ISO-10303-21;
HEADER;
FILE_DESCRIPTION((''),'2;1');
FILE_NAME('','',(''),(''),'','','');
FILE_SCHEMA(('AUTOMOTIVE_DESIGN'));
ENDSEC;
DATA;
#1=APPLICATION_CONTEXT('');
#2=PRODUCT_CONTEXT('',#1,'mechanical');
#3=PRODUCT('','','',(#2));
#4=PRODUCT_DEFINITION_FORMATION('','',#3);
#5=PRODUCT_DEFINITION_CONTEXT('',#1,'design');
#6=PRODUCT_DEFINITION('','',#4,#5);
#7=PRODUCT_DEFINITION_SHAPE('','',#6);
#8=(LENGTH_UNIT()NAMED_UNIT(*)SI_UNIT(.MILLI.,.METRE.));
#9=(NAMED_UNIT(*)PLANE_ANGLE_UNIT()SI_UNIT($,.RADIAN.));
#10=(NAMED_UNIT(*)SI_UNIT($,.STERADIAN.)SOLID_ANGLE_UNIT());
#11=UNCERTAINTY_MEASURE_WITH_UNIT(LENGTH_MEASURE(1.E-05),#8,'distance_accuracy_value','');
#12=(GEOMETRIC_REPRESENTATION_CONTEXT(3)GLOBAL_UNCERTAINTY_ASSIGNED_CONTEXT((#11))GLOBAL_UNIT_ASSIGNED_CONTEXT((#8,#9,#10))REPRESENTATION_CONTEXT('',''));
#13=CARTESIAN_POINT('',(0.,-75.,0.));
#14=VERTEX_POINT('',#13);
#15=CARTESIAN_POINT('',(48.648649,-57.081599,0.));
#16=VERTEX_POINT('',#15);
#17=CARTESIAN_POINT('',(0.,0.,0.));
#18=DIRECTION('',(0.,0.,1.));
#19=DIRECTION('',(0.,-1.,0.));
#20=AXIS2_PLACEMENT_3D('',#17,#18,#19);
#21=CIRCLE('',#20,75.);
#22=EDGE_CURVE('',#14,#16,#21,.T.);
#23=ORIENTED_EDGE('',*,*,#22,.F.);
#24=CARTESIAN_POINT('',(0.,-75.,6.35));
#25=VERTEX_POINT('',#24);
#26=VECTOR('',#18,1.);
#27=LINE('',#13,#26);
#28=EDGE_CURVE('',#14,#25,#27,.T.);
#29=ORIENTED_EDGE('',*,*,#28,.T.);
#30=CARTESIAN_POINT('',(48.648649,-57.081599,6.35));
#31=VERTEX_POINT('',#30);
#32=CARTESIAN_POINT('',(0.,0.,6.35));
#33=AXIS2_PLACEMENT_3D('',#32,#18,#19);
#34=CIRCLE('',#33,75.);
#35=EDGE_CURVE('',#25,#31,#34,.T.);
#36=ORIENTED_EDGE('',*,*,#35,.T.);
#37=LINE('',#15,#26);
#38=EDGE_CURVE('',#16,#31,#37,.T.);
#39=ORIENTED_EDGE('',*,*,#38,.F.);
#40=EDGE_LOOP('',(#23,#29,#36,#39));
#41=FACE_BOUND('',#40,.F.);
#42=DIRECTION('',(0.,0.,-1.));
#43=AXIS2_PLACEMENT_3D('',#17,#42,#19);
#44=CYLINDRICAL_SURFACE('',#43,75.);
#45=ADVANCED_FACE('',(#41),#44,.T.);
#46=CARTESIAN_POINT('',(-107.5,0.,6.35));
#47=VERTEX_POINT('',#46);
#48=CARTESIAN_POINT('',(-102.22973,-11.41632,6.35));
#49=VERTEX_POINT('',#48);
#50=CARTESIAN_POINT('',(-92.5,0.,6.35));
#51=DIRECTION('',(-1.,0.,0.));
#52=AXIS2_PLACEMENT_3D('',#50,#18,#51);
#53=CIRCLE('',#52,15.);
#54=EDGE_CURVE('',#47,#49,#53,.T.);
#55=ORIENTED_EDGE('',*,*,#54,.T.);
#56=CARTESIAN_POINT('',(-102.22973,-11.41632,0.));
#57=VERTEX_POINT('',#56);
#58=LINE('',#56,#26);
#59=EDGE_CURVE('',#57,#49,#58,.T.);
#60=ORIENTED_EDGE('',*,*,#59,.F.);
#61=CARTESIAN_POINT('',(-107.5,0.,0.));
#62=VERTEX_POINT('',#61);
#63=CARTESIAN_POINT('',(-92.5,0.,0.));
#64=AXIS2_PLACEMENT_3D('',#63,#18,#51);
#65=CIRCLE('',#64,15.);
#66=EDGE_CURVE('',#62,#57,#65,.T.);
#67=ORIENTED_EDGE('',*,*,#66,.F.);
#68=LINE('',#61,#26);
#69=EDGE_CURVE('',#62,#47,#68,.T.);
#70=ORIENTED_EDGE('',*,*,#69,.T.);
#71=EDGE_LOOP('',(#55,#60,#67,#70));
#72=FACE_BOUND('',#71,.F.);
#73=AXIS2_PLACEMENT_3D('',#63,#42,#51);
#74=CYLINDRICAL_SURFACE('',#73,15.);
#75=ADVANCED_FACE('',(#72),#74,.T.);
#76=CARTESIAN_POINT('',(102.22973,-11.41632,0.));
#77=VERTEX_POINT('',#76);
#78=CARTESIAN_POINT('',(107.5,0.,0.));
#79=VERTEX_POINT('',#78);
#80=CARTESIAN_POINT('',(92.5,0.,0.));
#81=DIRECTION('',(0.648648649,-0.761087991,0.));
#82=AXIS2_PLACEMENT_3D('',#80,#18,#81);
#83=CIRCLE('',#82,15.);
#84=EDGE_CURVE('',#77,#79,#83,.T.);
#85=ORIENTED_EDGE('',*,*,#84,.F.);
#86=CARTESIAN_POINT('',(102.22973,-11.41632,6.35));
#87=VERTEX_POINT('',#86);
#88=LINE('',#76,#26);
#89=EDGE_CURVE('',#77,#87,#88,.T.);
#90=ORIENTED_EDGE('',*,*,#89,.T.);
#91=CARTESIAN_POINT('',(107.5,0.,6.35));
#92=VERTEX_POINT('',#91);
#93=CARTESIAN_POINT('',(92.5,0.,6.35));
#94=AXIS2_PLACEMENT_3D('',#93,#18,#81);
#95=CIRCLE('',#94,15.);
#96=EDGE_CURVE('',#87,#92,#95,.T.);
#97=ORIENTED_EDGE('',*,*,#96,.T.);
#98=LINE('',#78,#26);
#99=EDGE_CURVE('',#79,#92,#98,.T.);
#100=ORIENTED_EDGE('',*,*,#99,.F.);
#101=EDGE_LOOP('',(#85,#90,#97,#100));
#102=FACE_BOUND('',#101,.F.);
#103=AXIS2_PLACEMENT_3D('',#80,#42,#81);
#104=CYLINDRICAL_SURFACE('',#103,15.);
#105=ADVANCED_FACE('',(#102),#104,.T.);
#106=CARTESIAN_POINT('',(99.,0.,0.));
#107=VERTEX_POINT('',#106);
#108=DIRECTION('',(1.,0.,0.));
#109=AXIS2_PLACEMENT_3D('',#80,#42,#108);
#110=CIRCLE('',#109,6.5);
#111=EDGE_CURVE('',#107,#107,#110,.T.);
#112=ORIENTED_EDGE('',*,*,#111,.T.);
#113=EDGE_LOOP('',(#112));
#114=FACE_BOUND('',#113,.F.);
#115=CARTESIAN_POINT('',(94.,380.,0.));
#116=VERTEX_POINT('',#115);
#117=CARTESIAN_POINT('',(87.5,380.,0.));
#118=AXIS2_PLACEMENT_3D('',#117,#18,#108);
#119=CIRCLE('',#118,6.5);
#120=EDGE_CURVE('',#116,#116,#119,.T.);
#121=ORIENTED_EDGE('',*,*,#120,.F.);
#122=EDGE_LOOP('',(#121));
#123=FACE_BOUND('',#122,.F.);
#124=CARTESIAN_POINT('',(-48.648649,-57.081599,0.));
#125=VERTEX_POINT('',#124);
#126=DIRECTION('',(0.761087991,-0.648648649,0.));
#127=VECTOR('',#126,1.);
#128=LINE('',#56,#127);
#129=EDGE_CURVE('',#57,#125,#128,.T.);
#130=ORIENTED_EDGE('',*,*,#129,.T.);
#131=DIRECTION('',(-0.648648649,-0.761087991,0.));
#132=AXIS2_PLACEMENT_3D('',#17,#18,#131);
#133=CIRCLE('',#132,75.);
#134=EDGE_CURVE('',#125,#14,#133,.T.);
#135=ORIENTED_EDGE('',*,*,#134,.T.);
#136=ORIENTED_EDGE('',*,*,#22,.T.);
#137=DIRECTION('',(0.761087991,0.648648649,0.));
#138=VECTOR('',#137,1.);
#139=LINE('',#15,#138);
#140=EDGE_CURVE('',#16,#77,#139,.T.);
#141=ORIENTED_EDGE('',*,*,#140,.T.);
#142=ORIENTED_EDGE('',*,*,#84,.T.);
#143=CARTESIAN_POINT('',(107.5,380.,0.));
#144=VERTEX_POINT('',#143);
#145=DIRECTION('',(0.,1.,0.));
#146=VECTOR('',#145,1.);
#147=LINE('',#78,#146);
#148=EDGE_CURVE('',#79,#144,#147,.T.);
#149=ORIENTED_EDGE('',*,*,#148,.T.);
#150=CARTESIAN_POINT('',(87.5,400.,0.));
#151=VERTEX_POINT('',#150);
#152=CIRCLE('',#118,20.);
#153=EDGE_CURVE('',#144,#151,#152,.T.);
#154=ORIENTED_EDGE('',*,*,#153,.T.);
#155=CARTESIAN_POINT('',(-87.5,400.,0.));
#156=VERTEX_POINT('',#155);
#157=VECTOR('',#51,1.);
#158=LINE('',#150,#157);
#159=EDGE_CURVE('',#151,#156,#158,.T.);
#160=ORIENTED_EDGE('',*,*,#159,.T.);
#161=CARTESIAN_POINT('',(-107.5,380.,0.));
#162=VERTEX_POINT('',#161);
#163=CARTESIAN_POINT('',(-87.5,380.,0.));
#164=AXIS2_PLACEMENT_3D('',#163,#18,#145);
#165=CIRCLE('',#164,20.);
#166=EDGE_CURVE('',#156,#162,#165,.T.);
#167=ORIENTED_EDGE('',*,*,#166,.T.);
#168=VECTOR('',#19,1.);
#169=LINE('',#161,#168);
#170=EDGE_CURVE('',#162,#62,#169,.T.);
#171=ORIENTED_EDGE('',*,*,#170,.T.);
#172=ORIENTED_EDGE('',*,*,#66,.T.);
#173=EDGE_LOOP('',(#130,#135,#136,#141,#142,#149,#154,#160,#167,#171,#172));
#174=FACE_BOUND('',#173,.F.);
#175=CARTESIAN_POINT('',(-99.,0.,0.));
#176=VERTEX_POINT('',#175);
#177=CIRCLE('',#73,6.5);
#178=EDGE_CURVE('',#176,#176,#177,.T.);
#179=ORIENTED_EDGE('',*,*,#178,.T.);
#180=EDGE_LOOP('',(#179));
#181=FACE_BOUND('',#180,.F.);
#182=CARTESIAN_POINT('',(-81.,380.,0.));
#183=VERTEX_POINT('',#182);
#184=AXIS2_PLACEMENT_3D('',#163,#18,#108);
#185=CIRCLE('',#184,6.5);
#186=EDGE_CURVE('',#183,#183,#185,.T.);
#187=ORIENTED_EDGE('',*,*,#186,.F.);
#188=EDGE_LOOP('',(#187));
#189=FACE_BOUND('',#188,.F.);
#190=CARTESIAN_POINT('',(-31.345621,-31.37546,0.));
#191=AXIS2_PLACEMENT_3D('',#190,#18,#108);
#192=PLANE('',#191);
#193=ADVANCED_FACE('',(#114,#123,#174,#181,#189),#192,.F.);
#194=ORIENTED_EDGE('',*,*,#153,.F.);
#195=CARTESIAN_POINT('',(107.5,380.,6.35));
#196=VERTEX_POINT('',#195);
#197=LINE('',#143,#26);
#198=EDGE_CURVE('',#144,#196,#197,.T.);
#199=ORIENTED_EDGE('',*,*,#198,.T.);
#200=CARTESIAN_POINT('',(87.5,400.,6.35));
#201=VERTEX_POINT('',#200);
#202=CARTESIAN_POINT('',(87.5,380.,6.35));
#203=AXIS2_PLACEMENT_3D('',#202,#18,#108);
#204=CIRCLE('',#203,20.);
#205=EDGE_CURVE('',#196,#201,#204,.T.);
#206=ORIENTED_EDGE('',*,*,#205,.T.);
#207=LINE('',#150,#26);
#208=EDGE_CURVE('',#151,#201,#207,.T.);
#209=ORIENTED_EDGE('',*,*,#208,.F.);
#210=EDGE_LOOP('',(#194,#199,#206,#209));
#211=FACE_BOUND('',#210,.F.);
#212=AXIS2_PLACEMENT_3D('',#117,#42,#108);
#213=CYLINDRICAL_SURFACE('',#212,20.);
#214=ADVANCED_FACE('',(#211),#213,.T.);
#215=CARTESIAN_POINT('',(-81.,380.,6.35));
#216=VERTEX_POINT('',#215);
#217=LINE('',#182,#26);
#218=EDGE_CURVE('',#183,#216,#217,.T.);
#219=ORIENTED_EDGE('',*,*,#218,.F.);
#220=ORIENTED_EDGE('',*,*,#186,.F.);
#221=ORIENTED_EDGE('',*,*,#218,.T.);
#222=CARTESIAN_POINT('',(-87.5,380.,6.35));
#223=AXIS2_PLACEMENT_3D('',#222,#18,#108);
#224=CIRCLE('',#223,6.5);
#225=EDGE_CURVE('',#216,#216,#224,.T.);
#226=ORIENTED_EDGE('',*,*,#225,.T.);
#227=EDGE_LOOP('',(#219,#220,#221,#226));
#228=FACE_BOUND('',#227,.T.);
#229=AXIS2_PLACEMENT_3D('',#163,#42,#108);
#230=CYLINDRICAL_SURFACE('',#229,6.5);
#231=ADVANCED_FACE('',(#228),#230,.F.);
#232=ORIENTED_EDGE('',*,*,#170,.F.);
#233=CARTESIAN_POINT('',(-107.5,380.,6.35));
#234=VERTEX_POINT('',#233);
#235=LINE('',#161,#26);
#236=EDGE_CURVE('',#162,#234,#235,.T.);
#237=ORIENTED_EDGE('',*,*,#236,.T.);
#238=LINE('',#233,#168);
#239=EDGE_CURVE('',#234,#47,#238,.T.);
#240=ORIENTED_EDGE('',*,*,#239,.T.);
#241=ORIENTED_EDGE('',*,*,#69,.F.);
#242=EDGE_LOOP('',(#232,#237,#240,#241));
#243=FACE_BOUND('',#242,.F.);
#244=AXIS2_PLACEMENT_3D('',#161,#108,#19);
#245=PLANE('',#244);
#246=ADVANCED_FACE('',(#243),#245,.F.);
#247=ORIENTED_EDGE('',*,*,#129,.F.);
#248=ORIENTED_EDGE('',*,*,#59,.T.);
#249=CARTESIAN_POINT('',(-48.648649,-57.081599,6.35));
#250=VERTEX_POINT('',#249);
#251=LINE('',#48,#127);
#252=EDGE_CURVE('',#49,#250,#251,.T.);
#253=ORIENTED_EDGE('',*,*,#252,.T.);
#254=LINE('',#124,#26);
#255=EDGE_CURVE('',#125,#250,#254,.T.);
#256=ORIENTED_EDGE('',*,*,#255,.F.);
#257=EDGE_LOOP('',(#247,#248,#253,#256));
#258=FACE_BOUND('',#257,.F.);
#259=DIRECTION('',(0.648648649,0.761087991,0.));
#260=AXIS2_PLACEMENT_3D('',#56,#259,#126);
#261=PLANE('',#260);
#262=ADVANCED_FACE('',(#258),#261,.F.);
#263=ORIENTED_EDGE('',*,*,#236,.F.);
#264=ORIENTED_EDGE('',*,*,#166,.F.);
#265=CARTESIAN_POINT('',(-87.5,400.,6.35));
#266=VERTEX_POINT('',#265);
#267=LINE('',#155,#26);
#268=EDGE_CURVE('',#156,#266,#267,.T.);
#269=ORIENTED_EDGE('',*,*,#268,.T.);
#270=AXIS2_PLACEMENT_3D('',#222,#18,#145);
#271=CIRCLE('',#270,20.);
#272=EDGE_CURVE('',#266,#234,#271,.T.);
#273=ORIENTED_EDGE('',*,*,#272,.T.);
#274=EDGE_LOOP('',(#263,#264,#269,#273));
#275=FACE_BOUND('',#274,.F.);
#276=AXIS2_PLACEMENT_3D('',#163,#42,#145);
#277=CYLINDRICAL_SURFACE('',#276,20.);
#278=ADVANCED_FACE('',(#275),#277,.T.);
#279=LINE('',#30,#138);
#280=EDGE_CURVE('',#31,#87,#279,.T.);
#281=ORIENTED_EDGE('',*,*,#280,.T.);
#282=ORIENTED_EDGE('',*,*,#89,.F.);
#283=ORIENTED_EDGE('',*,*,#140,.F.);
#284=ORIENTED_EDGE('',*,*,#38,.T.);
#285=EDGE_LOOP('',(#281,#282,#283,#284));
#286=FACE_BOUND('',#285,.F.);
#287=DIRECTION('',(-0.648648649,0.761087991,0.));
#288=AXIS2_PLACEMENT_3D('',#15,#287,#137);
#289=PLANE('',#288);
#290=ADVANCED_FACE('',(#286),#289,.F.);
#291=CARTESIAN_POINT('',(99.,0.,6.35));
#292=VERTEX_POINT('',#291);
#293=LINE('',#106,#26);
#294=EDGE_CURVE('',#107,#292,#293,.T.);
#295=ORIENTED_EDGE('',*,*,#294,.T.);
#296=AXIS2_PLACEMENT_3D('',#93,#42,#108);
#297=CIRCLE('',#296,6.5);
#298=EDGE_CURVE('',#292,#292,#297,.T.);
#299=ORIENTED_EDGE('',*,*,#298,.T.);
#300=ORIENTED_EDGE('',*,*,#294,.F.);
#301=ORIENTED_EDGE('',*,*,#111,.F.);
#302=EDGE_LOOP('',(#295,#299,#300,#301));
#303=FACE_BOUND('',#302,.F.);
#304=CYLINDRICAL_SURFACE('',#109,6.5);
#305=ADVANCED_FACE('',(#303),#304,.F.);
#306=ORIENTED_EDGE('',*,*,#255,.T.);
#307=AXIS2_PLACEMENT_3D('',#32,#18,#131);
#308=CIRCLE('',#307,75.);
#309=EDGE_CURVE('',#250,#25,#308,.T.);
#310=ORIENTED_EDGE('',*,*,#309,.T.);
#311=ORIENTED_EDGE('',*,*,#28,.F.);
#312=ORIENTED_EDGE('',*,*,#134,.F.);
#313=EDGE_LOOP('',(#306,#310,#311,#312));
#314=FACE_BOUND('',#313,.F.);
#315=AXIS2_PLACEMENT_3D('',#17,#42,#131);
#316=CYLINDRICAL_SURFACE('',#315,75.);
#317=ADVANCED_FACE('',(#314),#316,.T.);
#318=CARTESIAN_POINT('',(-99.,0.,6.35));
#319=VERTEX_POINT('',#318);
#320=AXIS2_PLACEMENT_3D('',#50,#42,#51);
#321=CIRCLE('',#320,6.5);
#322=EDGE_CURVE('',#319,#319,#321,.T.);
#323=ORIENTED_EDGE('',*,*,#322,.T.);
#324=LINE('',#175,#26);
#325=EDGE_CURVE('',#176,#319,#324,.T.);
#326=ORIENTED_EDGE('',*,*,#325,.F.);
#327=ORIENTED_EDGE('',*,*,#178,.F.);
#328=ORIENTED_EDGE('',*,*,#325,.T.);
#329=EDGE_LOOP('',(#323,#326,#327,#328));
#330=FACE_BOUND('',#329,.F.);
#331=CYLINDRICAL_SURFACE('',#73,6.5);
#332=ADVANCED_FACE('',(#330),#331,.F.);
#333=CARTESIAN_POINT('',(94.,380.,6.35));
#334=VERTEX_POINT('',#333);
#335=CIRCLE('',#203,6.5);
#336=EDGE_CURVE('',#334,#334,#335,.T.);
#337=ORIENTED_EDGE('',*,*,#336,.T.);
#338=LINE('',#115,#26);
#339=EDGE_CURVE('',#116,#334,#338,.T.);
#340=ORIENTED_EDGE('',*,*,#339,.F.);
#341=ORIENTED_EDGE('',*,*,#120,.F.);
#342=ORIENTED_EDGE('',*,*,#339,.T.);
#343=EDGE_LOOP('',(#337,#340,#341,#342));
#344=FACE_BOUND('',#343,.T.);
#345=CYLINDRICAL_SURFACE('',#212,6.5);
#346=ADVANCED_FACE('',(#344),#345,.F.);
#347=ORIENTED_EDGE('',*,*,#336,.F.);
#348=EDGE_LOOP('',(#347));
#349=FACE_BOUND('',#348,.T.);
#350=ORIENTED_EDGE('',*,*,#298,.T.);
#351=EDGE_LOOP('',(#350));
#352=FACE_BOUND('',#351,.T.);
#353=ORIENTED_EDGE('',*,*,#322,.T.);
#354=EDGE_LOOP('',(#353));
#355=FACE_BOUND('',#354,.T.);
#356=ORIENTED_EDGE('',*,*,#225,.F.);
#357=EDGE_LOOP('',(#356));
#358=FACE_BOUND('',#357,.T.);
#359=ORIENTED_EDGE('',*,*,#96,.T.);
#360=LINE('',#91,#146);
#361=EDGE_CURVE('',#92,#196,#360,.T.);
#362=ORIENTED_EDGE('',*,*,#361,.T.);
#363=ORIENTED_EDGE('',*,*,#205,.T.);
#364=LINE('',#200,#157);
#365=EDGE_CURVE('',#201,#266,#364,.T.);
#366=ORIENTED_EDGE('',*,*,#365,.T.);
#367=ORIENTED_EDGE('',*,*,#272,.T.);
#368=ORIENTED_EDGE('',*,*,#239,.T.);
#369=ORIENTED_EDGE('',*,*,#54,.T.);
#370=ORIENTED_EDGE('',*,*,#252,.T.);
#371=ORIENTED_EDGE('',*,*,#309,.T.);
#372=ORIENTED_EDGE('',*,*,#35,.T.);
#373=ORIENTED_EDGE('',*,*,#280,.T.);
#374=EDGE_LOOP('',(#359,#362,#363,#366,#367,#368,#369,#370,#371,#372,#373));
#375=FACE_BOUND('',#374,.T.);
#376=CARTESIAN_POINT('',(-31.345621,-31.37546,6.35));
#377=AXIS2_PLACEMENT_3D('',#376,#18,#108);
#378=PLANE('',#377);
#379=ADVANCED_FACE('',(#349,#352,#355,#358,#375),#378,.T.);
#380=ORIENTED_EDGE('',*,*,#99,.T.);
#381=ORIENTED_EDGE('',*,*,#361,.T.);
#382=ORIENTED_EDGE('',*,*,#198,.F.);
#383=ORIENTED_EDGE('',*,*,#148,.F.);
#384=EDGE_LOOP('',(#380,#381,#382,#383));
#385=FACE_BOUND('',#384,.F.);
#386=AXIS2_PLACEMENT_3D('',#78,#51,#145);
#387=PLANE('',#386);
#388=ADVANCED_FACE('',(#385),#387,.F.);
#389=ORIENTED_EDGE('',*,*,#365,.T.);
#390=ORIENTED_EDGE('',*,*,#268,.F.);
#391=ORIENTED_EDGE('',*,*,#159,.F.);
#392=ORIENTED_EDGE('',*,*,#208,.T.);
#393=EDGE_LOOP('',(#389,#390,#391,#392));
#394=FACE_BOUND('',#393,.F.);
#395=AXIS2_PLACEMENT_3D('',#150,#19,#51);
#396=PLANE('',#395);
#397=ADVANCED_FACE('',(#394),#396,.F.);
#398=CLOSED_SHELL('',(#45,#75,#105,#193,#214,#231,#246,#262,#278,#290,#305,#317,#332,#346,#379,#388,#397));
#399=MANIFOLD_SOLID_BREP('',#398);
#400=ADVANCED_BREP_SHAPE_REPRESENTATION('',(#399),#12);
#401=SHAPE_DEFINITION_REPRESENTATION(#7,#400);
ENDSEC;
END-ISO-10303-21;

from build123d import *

# Parameters (mm, degrees)
F0_R     = 6.5
F1_DEPTH = 6.35


# Not quite as in the source:
# - a length typed as a fraction of an inch, garbled in the dataset ("3 / 203.2 mm" for 3/8 in), is restored


with BuildPart() as f1:
    # F0 (on Top) → F1 (new body)
    with BuildSketch(Plane.XY):
        with BuildLine():
            Line((0, -75), (0, 0))
            Line((0, 0), (-75, 0))
            ThreePointArc((-75, 0), (-68.0942312118, -31.4352616607), (-48.6486486486, -57.0815993527))
            ThreePointArc((-48.6486486486, -57.0815993527), (-25.9218059609, -70.3779793382), (0, -75))
        make_face()
        with BuildLine():
            ThreePointArc((-48.6486486486, -57.0815993527), (-68.0942312118, -31.4352616607), (-75, 0))
            Line((-75, 0), (-77.5, 0))
            ThreePointArc((-77.5, 0), (-86.2129476679, -13.6188462424), (-102.2297297297, -11.4163198705))
            Line((-102.2297297297, -11.4163198705), (-48.6486486486, -57.0815993527))
        make_face()
        with BuildLine():
            Line((-86, 0), (-77.5, 0))
            ThreePointArc((-77.5, 0), (-86.2129476679, 13.6188462424), (-102.2297297297, 11.4163198705))
            ThreePointArc((-102.2297297297, 11.4163198705), (-106.1188462424, 6.2870523321), (-107.5, 0))
            Line((-107.5, 0), (-99, 0))
            ThreePointArc((-99, 0), (-92.5, 6.5), (-86, 0))
        make_face()
        with BuildLine():
            ThreePointArc((48.6486486486, -57.0815993527), (68.0942312118, -31.4352616607), (75, 0))
            Line((75, 0), (0, 0))
            Line((0, 0), (0, -75))
            ThreePointArc((0, -75), (25.9218059609, -70.3779793382), (48.6486486486, -57.0815993527))
        make_face()
        with BuildLine():
            ThreePointArc((-102.2297297297, -11.4163198705), (-86.2129476679, -13.6188462424), (-77.5, 0))
            Line((-77.5, 0), (-86, 0))
            ThreePointArc((-86, 0), (-92.5, -6.5), (-99, 0))
            Line((-99, 0), (-107.5, 0))
            ThreePointArc((-107.5, 0), (-106.1188462424, -6.2870523321), (-102.2297297297, -11.4163198705))
        make_face()
        with BuildLine():
            ThreePointArc((0, 75), (25.9218059609, 70.3779793382), (48.6486486486, 57.0815993527))
            Line((48.6486486486, 57.0815993527), (102.2297297297, 11.4163198705))
            ThreePointArc((102.2297297297, 11.4163198705), (106.1188462424, 6.2870523321), (107.5, 0))
            Line((107.5, 0), (107.5, 75))
            Line((107.5, 75), (0, 75))
        make_face()
        with BuildLine():
            ThreePointArc((-48.6486486486, 57.0815993527), (-25.9218059609, 70.3779793382), (0, 75))
            Line((0, 75), (107.5, 75))
            Line((107.5, 75), (107.5, 380))
            ThreePointArc((107.5, 380), (101.6421356237, 394.1421356237), (87.5, 400))
            Line((87.5, 400), (-87.5, 400))
            ThreePointArc((-87.5, 400), (-101.6421356237, 394.1421356237), (-107.5, 380))
            Line((-107.5, 380), (-107.5, 0))
            ThreePointArc((-107.5, 0), (-106.1188462424, 6.2870523321), (-102.2297297297, 11.4163198705))
            Line((-102.2297297297, 11.4163198705), (-48.6486486486, 57.0815993527))
        make_face()
        with Locations((-87.5, 380)):
            Circle(F0_R, mode=Mode.SUBTRACT)
        with Locations((87.5, 380)):
            Circle(F0_R, mode=Mode.SUBTRACT)
        with BuildLine():
            Line((86, 0), (77.5, 0))
            ThreePointArc((77.5, 0), (86.2129476679, -13.6188462424), (102.2297297297, -11.4163198705))
            ThreePointArc((102.2297297297, -11.4163198705), (106.1188462424, -6.2870523321), (107.5, 0))
            Line((107.5, 0), (99, 0))
            ThreePointArc((99, 0), (92.5, -6.5), (86, 0))
        make_face()
        with BuildLine():
            ThreePointArc((102.2297297297, 11.4163198705), (86.2129476679, 13.6188462424), (77.5, 0))
            Line((77.5, 0), (86, 0))
            ThreePointArc((86, 0), (92.5, 6.5), (99, 0))
            Line((99, 0), (107.5, 0))
            ThreePointArc((107.5, 0), (106.1188462424, 6.2870523321), (102.2297297297, 11.4163198705))
        make_face()
        with BuildLine():
            ThreePointArc((48.6486486486, 57.0815993527), (68.0942312118, 31.4352616607), (75, 0))
            Line((75, 0), (77.5, 0))
            ThreePointArc((77.5, 0), (86.2129476679, 13.6188462424), (102.2297297297, 11.4163198705))
            Line((102.2297297297, 11.4163198705), (48.6486486486, 57.0815993527))
        make_face()
        with BuildLine():
            Line((77.5, 0), (75, 0))
            ThreePointArc((75, 0), (68.0942312118, -31.4352616607), (48.6486486486, -57.0815993527))
            Line((48.6486486486, -57.0815993527), (102.2297297297, -11.4163198705))
            ThreePointArc((102.2297297297, -11.4163198705), (86.2129476679, -13.6188462424), (77.5, 0))
        make_face()
        with BuildLine():
            Line((0, 0), (75, 0))
            ThreePointArc((75, 0), (68.0942312118, 31.4352616607), (48.6486486486, 57.0815993527))
            ThreePointArc((48.6486486486, 57.0815993527), (25.9218059609, 70.3779793382), (0, 75))
            Line((0, 75), (0, 0))
        make_face()
        with BuildLine():
            Line((-77.5, 0), (-75, 0))
            ThreePointArc((-75, 0), (-68.0942312118, 31.4352616607), (-48.6486486486, 57.0815993527))
            Line((-48.6486486486, 57.0815993527), (-102.2297297297, 11.4163198705))
            ThreePointArc((-102.2297297297, 11.4163198705), (-86.2129476679, 13.6188462424), (-77.5, 0))
        make_face()
        with BuildLine():
            Line((-75, 0), (0, 0))
            Line((0, 0), (0, 75))
            ThreePointArc((0, 75), (-25.9218059609, 70.3779793382), (-48.6486486486, 57.0815993527))
            ThreePointArc((-48.6486486486, 57.0815993527), (-68.0942312118, 31.4352616607), (-75, 0))
        make_face()
    extrude(amount=F1_DEPTH)


solid = f1.part
